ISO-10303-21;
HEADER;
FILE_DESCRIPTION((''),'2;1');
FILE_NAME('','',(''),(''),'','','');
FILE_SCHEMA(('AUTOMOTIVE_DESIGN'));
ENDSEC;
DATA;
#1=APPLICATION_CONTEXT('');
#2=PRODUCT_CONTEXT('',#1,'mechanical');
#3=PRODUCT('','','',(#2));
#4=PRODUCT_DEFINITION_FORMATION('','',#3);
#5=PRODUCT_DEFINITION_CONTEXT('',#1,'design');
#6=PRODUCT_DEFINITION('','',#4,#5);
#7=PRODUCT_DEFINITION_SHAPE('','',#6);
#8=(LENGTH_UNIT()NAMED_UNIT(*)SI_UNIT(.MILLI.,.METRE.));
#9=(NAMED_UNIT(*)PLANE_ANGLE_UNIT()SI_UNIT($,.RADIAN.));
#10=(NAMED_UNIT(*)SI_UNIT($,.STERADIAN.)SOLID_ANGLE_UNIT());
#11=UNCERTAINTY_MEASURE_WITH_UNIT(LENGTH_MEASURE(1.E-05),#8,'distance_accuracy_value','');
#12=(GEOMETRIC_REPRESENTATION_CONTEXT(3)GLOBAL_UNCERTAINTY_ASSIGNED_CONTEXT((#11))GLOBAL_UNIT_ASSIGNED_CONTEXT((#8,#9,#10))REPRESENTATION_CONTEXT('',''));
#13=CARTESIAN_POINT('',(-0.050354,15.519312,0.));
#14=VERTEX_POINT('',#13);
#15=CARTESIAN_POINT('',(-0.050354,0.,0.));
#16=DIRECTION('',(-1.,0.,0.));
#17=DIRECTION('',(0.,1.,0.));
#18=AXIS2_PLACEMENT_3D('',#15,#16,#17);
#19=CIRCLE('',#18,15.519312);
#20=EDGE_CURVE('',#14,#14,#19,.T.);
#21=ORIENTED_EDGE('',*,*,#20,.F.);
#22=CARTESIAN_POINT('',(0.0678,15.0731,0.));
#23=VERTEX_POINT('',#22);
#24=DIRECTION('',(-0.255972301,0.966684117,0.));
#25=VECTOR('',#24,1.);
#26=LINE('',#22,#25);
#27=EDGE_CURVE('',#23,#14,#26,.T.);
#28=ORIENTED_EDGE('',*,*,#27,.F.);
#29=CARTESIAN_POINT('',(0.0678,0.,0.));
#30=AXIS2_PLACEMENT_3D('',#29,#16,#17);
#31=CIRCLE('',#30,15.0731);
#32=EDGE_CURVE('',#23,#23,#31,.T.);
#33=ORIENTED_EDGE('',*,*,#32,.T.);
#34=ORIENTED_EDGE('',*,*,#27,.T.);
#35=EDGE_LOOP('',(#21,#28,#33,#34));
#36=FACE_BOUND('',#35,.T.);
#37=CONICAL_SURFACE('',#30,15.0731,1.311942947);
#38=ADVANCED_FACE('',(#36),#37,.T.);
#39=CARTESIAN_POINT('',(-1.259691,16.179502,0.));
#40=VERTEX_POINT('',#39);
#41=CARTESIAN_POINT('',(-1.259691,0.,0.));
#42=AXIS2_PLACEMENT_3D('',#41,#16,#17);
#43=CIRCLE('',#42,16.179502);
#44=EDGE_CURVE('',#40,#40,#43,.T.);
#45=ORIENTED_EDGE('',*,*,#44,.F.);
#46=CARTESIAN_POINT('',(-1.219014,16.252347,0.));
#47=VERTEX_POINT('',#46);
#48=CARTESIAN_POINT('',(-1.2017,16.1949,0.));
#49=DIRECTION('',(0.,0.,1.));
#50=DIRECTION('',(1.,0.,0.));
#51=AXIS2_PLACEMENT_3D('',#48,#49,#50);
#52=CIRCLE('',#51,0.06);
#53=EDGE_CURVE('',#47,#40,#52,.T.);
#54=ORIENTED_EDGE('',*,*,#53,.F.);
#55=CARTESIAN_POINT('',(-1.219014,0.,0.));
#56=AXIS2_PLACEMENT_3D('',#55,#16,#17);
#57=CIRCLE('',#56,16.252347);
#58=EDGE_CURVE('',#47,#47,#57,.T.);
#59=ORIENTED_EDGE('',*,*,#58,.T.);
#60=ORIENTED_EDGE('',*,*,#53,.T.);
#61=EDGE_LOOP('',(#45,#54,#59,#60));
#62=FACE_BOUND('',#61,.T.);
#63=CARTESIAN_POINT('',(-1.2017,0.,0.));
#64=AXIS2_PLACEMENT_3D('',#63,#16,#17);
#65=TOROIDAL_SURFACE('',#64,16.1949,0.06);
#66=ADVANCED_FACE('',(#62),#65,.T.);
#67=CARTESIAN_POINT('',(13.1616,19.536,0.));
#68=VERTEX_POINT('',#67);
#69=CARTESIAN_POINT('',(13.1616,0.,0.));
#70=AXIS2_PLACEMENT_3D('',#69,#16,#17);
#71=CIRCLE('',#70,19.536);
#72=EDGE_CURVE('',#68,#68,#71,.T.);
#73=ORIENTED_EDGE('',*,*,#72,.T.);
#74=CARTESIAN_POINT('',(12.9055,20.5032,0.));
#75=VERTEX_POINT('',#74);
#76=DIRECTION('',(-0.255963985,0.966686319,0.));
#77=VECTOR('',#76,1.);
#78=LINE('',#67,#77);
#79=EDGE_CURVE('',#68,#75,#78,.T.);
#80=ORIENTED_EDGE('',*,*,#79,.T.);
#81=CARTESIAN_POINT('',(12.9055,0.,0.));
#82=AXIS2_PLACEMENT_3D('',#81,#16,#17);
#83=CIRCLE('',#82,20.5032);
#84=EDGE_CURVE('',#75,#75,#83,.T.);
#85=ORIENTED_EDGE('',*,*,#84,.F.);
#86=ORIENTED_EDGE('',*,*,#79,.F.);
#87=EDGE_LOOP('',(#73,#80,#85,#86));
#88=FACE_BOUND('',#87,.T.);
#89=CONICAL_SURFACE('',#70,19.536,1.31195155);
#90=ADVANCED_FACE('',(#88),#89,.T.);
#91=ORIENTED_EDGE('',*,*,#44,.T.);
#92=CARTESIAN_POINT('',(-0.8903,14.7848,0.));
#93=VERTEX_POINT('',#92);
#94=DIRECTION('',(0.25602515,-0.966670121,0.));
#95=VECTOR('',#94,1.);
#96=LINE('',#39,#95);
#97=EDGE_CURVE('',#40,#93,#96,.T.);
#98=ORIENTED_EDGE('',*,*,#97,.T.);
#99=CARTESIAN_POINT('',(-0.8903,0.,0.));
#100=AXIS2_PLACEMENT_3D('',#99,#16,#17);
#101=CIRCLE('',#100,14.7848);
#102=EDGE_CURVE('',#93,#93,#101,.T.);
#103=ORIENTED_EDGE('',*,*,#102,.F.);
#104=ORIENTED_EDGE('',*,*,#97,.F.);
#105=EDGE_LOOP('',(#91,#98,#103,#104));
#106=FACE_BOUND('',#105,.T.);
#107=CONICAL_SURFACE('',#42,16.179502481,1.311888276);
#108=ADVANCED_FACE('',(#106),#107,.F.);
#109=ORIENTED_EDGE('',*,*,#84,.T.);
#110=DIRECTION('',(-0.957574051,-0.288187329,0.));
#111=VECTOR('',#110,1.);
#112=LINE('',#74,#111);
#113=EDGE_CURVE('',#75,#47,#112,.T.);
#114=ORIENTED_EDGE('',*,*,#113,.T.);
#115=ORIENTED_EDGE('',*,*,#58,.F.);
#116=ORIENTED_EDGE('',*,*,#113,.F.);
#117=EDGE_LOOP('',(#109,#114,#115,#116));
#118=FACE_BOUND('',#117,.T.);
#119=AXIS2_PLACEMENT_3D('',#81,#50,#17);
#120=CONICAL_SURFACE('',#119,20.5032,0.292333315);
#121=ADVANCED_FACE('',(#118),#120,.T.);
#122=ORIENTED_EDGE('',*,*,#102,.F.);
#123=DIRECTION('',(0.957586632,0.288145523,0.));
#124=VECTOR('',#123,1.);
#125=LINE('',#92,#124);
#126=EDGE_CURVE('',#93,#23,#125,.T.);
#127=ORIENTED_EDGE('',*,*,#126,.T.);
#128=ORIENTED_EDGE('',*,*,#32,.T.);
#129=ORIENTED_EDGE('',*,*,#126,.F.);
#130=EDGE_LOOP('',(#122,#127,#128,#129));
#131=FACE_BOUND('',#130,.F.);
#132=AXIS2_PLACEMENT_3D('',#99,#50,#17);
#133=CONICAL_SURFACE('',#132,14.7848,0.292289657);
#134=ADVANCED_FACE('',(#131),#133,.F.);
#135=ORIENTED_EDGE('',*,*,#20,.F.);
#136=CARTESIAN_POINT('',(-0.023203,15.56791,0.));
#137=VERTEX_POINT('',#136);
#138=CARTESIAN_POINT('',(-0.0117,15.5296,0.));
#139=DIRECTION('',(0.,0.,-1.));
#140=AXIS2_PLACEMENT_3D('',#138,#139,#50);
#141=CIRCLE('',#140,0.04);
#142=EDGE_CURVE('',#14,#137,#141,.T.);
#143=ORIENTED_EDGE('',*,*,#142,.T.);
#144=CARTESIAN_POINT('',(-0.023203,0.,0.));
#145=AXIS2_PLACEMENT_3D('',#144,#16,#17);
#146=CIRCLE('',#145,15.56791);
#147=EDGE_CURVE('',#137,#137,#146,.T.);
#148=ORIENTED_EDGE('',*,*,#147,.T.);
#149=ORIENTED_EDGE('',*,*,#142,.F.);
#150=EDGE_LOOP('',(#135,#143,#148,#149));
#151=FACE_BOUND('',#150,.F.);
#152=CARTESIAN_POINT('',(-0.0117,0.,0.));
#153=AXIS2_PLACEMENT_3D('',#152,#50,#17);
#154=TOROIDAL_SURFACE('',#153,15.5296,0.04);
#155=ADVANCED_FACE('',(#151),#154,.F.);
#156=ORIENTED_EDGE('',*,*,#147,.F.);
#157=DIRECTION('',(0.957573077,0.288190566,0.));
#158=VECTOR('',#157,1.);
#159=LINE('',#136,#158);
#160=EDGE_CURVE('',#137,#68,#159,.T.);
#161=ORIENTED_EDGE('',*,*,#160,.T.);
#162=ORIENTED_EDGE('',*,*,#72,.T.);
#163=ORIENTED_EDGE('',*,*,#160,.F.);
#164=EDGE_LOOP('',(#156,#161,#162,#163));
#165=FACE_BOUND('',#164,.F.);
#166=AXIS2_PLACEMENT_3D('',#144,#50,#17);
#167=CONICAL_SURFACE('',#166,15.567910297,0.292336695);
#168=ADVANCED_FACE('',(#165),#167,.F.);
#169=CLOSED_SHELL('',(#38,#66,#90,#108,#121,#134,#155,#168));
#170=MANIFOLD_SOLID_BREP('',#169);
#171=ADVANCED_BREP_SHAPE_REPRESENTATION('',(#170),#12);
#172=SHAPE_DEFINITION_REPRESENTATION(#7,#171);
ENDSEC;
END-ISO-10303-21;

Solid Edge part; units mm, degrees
sketch "Sketch1" plane through (0, 0, 0) normal (0, 0, 1) x (1, 0, 0)
  arc A0 (-1.219, 16.2523) -> (-1.2597, 16.1795) centre (-1.2017, 16.1949) ccw
  line L0 (-1.2597, 16.1795) -> (-0.8903, 14.7848)
  line L1 (-0.8903, 14.7848) -> (0.0678, 15.0731)
  line L2 (0.0678, 15.0731) -> (-0.0504, 15.5193)
  arc A1 (-0.0504, 15.5193) -> (-0.0232, 15.5679) centre (-0.0117, 15.5296) cw
  line L3 (-0.0232, 15.5679) -> (13.1616, 19.536)
  line L4 (13.1616, 19.536) -> (12.9055, 20.5032)
  line L5 (12.9055, 20.5032) -> (-1.219, 16.2523)
revolve "RevolvedProtrusion1" add sketch "Sketch1" angle 360 about axis through (50, 0, 0) along (-1, 0, 0)
properties part number "320/22 X_cage"
